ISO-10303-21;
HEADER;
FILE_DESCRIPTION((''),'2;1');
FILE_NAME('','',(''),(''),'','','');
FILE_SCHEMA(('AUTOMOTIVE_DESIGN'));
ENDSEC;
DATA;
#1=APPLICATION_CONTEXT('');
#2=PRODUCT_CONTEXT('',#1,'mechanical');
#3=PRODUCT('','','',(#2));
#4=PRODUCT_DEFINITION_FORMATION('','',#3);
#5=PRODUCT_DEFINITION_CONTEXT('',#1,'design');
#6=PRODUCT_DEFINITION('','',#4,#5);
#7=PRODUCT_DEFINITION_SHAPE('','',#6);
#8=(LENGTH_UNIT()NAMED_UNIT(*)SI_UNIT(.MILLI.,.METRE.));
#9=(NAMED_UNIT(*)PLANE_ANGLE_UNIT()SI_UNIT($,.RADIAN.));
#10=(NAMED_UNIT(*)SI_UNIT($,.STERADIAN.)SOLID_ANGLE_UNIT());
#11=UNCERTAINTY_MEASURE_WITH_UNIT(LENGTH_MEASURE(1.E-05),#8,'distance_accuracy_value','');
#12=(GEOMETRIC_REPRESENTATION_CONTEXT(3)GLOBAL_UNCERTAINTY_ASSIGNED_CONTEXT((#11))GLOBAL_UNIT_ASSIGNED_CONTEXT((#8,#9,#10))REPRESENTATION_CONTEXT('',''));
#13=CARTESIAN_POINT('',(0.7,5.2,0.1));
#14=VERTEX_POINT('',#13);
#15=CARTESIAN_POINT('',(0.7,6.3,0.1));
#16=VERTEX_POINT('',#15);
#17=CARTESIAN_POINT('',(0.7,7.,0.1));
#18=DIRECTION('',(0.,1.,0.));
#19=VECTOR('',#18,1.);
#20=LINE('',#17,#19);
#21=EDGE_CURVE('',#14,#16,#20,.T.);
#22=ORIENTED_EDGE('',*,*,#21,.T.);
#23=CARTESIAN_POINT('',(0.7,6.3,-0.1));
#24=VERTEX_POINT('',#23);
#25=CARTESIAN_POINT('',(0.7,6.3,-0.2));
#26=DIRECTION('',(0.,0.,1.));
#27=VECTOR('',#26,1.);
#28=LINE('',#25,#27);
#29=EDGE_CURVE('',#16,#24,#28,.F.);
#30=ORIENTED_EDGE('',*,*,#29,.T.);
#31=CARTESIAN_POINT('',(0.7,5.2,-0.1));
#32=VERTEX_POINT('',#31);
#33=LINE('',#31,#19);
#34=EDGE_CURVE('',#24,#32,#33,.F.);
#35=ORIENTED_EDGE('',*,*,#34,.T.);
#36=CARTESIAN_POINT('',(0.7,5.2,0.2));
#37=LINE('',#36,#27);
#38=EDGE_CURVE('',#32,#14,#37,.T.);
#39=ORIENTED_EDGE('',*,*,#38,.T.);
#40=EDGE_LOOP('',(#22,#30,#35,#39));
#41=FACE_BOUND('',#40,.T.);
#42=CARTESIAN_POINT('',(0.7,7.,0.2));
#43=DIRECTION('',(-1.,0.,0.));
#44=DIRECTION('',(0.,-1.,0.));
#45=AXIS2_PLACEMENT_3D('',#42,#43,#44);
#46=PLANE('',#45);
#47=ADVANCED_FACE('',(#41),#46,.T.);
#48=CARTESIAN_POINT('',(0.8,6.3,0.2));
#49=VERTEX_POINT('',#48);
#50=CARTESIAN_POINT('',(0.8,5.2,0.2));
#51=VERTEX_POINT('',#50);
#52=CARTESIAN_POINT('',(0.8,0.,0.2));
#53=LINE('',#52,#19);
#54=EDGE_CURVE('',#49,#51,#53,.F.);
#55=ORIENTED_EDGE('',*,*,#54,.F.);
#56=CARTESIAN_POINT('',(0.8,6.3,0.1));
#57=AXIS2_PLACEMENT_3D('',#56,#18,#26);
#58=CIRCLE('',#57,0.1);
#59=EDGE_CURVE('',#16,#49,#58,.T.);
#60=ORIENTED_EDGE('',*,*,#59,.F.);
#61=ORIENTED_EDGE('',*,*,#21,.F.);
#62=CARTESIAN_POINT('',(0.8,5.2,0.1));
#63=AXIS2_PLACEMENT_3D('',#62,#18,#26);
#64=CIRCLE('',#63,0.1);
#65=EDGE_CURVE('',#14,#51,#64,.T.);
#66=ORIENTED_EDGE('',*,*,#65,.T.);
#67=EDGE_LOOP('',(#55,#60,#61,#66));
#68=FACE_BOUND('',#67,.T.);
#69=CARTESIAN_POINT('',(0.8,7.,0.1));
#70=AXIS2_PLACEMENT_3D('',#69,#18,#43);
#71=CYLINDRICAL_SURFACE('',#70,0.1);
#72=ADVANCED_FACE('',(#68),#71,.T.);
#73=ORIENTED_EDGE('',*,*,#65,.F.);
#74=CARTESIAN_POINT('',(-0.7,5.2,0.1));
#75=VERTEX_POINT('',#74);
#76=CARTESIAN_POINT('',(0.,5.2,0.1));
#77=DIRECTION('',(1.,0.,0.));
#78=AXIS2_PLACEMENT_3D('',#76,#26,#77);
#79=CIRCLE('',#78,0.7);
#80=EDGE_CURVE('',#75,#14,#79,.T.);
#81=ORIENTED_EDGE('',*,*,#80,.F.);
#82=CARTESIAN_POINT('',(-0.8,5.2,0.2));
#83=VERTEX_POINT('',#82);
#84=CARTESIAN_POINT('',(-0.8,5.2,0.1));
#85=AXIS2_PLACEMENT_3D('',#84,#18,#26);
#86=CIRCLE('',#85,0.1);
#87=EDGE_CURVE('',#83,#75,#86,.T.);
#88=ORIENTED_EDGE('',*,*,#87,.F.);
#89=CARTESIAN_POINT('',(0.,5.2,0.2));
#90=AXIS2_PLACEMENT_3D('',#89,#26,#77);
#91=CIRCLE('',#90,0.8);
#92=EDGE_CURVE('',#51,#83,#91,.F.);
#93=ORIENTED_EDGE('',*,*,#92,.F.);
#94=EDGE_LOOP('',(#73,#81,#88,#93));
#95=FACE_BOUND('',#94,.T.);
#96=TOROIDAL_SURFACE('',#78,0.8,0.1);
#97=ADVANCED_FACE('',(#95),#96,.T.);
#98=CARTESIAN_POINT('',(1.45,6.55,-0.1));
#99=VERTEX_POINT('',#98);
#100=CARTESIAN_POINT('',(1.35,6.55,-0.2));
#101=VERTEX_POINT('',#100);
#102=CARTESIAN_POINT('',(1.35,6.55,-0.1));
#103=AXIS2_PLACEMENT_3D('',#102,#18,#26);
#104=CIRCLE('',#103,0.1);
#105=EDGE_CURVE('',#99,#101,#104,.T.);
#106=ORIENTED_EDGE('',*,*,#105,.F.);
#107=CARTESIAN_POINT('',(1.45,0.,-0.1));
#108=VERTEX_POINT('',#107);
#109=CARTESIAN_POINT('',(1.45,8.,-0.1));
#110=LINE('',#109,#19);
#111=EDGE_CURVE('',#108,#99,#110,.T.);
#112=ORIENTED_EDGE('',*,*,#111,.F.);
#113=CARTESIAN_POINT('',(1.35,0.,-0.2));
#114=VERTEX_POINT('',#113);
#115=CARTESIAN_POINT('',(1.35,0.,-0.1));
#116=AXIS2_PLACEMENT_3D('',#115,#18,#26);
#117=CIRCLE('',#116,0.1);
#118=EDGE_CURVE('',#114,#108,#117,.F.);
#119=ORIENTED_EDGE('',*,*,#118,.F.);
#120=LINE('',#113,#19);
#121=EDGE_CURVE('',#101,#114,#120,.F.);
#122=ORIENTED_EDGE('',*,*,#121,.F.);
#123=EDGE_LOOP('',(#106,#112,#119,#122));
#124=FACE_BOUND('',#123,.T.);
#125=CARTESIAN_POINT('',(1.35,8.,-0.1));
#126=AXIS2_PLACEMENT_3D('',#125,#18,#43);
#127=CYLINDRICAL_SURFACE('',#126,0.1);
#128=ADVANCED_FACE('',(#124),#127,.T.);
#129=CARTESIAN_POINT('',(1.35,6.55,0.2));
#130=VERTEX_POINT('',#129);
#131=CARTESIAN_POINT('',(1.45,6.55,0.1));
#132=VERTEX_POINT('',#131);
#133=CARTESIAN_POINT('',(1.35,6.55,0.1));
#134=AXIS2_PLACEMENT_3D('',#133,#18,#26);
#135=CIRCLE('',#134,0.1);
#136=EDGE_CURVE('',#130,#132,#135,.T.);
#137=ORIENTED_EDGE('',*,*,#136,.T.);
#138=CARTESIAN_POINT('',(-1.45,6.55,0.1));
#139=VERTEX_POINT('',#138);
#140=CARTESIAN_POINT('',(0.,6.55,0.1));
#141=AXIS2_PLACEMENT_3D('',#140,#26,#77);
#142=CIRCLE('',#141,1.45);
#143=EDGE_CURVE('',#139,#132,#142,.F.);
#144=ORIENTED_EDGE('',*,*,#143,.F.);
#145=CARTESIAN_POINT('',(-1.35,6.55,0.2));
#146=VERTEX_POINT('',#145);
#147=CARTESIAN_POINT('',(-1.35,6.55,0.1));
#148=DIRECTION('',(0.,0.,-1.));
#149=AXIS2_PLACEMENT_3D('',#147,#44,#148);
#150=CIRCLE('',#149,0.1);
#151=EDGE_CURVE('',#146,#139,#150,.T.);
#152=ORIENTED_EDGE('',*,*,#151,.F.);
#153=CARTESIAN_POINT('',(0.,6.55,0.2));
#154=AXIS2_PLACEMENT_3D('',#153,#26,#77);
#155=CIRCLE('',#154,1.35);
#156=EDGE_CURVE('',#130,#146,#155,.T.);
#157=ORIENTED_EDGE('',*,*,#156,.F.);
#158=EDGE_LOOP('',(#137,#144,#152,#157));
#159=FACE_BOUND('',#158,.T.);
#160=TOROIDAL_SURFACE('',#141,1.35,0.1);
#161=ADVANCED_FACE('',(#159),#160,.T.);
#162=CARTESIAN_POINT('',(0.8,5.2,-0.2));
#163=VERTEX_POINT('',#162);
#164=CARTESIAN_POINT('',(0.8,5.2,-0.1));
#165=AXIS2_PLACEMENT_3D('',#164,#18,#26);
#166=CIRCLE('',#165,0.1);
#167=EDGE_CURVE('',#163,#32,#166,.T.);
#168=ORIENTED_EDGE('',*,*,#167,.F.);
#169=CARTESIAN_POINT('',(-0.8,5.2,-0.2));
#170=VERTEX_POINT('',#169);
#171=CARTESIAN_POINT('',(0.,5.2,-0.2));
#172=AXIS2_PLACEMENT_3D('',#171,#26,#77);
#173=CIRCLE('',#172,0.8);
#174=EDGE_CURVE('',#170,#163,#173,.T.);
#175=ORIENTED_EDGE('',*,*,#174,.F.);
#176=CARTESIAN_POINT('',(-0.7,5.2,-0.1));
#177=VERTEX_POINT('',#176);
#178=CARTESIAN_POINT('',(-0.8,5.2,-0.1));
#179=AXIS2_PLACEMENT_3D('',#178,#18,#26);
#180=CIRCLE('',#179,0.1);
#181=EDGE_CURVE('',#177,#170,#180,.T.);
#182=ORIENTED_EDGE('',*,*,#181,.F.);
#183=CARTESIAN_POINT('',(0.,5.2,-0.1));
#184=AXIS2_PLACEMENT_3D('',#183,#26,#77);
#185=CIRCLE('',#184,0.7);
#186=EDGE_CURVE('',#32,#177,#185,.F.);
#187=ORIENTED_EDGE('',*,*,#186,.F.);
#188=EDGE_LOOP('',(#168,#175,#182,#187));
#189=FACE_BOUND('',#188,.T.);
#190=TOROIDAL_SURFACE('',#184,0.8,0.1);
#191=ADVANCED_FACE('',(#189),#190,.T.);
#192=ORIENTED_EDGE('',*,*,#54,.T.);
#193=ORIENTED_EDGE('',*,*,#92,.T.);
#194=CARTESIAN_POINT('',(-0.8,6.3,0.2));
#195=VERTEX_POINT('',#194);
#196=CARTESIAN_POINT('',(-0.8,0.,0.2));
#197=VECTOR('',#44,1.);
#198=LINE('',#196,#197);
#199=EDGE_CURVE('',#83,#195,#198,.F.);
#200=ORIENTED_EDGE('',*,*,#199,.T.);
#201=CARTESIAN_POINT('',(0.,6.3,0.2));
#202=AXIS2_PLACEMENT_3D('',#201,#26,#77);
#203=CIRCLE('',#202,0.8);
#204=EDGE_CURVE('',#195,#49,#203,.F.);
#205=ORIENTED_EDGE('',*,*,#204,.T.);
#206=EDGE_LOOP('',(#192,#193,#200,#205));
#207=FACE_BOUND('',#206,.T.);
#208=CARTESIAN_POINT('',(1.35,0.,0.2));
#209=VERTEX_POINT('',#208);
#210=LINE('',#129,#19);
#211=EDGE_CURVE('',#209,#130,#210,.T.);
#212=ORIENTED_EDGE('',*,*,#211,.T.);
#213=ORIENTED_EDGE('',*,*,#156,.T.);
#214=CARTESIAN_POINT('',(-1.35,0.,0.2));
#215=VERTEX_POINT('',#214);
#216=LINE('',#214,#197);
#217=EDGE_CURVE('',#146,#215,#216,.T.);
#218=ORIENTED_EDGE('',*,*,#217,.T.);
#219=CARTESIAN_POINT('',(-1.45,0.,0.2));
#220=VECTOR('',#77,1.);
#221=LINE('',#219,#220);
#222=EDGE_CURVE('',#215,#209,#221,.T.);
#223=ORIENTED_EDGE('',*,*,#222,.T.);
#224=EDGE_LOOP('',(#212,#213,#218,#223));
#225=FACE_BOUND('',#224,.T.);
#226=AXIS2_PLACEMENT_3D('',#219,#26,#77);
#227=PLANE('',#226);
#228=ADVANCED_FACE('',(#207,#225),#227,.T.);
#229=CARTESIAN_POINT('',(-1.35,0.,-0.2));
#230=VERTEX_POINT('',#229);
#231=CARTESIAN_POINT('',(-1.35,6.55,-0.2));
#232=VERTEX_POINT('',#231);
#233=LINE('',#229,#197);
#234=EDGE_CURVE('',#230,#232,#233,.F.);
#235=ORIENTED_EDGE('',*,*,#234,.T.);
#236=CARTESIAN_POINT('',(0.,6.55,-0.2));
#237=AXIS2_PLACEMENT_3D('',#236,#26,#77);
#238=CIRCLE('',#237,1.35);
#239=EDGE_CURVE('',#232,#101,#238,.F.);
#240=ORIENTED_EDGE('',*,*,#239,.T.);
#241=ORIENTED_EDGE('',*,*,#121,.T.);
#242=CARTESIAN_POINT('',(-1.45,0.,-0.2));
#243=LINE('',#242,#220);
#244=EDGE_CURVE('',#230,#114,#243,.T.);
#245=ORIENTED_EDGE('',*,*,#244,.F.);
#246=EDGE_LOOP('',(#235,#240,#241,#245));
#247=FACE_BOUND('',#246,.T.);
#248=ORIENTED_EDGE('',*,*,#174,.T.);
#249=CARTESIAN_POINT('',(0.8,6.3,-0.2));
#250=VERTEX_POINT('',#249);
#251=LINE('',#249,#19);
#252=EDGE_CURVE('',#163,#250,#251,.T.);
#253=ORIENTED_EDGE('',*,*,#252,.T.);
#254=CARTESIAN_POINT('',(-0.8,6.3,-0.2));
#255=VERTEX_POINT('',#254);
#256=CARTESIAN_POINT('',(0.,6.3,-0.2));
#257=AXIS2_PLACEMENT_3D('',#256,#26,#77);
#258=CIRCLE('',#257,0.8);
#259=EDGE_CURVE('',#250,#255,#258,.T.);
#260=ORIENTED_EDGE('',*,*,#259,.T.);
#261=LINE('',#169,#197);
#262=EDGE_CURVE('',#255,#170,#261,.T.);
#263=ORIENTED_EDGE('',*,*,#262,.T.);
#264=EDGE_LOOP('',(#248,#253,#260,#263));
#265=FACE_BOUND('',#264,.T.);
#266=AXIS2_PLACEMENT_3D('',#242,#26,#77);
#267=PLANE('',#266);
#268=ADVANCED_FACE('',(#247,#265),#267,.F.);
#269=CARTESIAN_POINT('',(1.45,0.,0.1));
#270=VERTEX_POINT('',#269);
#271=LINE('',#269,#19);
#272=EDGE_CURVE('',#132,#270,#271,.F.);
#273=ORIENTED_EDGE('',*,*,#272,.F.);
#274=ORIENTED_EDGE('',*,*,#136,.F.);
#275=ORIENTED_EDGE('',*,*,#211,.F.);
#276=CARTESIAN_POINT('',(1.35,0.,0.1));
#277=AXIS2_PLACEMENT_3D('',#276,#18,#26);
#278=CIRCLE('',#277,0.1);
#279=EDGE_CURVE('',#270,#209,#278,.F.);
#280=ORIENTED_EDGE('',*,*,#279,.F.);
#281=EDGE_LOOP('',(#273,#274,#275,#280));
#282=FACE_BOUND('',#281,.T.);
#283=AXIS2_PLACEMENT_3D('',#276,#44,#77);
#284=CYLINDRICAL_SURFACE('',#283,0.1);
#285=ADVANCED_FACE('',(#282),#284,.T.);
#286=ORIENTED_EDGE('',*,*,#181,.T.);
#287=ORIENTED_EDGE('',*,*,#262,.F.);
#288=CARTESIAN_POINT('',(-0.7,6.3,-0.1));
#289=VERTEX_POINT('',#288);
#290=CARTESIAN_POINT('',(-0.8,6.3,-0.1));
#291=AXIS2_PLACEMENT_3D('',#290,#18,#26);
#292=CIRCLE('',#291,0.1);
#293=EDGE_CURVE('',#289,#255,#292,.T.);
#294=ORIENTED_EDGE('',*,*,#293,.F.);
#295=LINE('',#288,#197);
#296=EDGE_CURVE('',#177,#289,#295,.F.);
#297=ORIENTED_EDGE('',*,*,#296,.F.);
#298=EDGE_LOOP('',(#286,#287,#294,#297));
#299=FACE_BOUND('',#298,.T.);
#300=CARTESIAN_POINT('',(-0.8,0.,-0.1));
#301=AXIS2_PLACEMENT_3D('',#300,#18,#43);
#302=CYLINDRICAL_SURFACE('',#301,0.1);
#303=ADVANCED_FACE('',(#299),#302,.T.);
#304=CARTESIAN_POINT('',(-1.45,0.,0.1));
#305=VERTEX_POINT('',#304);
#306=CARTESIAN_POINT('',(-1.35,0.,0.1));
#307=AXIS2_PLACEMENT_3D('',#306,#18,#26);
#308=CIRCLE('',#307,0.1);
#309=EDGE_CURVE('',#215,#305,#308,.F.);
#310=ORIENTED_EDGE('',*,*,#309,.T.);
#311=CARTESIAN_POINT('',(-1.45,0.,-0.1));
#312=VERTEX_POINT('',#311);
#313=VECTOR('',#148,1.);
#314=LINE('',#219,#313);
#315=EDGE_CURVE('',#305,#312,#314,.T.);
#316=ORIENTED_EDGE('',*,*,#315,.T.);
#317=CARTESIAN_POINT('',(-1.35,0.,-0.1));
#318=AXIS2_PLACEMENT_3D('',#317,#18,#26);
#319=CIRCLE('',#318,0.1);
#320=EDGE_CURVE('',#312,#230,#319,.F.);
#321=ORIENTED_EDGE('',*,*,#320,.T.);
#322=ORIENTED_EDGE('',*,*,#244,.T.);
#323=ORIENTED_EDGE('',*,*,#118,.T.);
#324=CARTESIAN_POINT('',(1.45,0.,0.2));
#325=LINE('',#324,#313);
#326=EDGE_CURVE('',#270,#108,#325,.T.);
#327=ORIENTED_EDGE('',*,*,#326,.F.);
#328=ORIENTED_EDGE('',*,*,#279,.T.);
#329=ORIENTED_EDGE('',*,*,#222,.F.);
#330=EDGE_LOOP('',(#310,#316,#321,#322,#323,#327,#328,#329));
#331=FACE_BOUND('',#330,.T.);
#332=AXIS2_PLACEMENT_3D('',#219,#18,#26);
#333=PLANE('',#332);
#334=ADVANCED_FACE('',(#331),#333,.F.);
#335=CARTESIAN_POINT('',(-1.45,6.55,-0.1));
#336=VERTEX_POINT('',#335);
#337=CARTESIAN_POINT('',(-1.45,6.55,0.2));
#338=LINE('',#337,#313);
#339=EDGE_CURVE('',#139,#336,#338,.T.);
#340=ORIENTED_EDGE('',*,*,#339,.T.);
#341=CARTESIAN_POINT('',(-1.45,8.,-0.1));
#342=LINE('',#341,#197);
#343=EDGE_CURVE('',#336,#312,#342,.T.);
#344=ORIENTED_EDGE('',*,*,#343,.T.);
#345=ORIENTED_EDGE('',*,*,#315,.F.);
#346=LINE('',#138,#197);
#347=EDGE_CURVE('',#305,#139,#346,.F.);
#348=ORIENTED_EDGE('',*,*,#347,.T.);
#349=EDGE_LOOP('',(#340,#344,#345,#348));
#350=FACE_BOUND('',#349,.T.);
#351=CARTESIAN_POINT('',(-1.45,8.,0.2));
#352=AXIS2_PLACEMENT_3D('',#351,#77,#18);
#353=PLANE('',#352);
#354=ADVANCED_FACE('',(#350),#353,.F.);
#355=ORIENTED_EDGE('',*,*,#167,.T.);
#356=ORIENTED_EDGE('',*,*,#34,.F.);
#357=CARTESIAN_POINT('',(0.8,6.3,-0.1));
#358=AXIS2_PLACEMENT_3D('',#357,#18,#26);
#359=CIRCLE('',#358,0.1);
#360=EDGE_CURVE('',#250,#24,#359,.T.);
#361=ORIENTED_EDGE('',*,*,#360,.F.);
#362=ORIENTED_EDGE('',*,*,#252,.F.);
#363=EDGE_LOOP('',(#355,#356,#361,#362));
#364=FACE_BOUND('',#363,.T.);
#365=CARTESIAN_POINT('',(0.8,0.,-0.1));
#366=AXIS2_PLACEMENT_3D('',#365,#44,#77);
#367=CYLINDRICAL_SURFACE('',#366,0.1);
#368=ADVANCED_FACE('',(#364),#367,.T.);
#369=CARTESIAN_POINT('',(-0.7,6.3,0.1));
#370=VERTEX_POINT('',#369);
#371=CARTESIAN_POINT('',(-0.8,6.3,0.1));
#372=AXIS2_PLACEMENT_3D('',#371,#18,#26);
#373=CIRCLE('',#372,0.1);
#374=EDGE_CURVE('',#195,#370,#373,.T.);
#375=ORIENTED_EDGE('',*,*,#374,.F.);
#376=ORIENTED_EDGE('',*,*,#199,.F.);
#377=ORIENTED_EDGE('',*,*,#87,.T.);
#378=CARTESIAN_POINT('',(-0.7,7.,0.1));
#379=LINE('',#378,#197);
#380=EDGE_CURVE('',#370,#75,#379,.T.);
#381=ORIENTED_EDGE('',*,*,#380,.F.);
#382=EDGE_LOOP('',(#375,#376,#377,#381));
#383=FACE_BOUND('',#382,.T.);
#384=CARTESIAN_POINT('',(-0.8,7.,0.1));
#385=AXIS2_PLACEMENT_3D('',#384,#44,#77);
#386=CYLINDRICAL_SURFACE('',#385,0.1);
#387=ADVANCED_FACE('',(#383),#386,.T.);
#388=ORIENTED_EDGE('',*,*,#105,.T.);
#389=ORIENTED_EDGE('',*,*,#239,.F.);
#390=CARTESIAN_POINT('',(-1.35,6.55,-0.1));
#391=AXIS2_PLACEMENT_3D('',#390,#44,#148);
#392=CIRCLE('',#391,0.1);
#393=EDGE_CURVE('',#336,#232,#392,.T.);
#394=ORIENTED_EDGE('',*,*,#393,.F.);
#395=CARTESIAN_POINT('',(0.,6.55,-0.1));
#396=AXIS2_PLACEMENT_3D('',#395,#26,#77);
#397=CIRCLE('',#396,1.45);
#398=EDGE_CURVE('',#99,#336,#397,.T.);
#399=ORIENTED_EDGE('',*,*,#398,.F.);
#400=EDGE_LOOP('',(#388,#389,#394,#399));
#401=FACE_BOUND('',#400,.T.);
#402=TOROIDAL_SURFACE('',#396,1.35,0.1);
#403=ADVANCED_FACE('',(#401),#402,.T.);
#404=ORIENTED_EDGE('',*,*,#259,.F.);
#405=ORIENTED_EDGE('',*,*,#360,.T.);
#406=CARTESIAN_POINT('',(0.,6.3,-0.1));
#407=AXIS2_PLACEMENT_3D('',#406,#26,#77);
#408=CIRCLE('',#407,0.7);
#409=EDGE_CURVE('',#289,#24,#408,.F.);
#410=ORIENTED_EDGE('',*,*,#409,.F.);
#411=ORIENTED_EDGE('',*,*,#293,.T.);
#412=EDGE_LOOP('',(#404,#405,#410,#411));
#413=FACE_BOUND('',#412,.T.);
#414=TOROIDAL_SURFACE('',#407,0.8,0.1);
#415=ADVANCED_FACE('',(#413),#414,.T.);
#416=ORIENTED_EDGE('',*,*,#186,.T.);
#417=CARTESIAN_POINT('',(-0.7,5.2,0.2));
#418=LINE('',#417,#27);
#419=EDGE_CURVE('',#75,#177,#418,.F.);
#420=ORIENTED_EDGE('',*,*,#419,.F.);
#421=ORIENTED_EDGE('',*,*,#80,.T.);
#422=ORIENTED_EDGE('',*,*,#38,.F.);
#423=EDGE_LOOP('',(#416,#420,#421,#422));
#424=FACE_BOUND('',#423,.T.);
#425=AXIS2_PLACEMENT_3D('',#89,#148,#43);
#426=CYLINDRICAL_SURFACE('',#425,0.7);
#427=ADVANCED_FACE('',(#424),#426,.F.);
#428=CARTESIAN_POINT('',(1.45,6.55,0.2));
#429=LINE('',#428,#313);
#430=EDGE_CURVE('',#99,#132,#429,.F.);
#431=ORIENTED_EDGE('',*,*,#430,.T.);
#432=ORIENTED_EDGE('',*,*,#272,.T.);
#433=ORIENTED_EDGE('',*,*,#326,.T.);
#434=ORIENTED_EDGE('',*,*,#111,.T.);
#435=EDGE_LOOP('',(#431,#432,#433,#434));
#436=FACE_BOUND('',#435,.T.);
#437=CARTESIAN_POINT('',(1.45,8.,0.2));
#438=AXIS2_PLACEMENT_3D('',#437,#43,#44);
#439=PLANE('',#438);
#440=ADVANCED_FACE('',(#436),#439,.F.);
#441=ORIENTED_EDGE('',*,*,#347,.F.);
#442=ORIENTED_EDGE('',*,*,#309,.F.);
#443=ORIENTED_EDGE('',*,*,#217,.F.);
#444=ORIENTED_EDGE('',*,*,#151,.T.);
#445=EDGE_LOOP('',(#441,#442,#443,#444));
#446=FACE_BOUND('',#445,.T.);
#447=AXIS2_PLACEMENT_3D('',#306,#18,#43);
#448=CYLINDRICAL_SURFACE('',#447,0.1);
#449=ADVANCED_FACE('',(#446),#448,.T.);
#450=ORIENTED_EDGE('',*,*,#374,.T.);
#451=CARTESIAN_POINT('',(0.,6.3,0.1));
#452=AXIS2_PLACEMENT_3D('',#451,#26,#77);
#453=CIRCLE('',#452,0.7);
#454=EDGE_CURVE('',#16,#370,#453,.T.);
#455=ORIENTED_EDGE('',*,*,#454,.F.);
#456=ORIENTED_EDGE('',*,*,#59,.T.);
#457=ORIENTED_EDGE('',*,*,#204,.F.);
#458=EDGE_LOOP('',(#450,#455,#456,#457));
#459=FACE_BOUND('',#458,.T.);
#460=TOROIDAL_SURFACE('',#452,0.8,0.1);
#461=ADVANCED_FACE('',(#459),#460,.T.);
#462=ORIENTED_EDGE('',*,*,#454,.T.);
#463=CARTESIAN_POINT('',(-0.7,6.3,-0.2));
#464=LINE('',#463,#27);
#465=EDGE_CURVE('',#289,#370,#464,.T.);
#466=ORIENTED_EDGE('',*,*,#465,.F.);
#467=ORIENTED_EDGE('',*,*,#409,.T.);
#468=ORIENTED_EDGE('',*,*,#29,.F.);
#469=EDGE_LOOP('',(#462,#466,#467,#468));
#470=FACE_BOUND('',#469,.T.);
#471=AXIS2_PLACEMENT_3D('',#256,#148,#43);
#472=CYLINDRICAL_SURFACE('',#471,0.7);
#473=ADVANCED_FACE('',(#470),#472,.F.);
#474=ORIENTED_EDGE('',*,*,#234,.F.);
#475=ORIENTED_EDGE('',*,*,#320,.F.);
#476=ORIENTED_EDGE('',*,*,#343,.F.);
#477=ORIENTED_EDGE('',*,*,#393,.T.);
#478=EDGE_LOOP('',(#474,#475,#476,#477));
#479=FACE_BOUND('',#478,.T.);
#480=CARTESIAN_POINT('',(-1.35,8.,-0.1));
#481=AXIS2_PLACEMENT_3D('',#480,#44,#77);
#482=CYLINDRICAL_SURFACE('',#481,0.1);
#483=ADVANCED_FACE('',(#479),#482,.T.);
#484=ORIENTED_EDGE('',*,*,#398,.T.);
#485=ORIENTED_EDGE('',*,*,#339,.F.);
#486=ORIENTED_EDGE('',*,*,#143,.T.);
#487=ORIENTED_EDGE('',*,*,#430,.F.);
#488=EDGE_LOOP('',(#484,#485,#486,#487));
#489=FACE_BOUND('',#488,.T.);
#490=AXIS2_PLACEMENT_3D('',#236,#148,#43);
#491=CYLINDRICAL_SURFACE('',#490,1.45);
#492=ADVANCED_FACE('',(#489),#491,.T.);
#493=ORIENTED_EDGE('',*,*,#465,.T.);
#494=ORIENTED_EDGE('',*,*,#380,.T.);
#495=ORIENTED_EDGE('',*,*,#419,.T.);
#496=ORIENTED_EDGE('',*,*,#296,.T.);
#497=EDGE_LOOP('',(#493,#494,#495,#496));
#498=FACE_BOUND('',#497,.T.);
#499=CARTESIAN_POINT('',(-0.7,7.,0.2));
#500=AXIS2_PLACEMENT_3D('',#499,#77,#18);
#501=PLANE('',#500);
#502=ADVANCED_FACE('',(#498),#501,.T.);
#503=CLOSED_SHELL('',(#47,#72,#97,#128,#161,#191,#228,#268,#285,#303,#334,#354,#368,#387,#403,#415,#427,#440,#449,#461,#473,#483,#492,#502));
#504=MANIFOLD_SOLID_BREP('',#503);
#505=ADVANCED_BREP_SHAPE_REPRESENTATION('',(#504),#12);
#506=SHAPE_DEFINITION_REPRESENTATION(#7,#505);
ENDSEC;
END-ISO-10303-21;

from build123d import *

# Parameters (mm, degrees)
SKETCH1_W      = 2.9
SKETCH1_H      = 8
SKETCH1_W_2    = 1.4
SKETCH1_H_2    = 2.5
EXTRUDE1_DEPTH = 0.2
FILLET4_RADIUS = 1.45
FILLET4_LENGTH = 0.4
FILLET5_R      = 0.7
FILLET6_R      = 0.7
FILLET3_R      = 0.1


with BuildPart() as part:
    # Sketch1 → Extrude1 (new, symmetric)
    with BuildSketch(Plane.XY):
        with Locations((0, 4)):
            Rectangle(SKETCH1_W, SKETCH1_H)
        with Locations((0, 5.75)):
            Rectangle(SKETCH1_W_2, SKETCH1_H_2, mode=Mode.SUBTRACT)
    extrude(amount=EXTRUDE1_DEPTH, both=True)

    # Fillet4: full round fillet: the end face becomes a half cylinder, R = half its width
    fillet4_face = Plane((0, 8, 0), x_dir=(0, 0, 1), z_dir=(0, 1, 0))  # on the end face: x along it, z out of the body
    fillet4_slab = fillet4_face.offset(-FILLET4_RADIUS / 2) * Box(FILLET4_LENGTH, 2 * FILLET4_RADIUS, FILLET4_RADIUS, mode=Mode.PRIVATE)  # the body's end, R deep
    fillet4_round = Plane((0, 6.55, 0), x_dir=(0, 1, 0), z_dir=(0, 0, 1)) * Cylinder(FILLET4_RADIUS, FILLET4_LENGTH, mode=Mode.PRIVATE)  # its axis R under the face
    add(fillet4_slab - fillet4_round, mode=Mode.SUBTRACT)

    # Fillet5
    fillet5_edges = [part.edges().sort_by_distance(p)[0] for p in [
        (-0.7, 7, 0),
        (0.7, 7, 0),
    ]]
    fillet(fillet5_edges, radius=FILLET5_R - 0.0001)  # a hair under: the kernel refuses the full size

    # Fillet6
    fillet6_edges = [part.edges().sort_by_distance(p)[0] for p in [
        (-0.7, 4.5, 0),
        (0.7, 4.5, 0),
    ]]
    fillet(fillet6_edges, radius=FILLET6_R - 0.0001)  # a hair under: the kernel refuses the full size

    # Fillet3
    fillet3_edges = [part.edges().sort_by_distance(p)[0] for p in [
        (1.45, 3.275, 0.2),
        (-1.45, 3.275, -0.2),
        (-1.45, 3.275, 0.2),
        (0, 8, -0.2),
        (0, 8, 0.2),
        (-0.7, 5.75, -0.2),
        (-0.7, 5.75, 0.2),
        (0, 7, -0.2),
        (0, 7, 0.2),
        (0.7, 5.75, 0.2),
        (0.7, 5.75, -0.2),
        (0, 4.5, 0.2),
        (0, 4.5, -0.2),
        (1.45, 3.275, -0.2),
    ]]
    fillet(fillet3_edges, radius=FILLET3_R)


solid = part.part
